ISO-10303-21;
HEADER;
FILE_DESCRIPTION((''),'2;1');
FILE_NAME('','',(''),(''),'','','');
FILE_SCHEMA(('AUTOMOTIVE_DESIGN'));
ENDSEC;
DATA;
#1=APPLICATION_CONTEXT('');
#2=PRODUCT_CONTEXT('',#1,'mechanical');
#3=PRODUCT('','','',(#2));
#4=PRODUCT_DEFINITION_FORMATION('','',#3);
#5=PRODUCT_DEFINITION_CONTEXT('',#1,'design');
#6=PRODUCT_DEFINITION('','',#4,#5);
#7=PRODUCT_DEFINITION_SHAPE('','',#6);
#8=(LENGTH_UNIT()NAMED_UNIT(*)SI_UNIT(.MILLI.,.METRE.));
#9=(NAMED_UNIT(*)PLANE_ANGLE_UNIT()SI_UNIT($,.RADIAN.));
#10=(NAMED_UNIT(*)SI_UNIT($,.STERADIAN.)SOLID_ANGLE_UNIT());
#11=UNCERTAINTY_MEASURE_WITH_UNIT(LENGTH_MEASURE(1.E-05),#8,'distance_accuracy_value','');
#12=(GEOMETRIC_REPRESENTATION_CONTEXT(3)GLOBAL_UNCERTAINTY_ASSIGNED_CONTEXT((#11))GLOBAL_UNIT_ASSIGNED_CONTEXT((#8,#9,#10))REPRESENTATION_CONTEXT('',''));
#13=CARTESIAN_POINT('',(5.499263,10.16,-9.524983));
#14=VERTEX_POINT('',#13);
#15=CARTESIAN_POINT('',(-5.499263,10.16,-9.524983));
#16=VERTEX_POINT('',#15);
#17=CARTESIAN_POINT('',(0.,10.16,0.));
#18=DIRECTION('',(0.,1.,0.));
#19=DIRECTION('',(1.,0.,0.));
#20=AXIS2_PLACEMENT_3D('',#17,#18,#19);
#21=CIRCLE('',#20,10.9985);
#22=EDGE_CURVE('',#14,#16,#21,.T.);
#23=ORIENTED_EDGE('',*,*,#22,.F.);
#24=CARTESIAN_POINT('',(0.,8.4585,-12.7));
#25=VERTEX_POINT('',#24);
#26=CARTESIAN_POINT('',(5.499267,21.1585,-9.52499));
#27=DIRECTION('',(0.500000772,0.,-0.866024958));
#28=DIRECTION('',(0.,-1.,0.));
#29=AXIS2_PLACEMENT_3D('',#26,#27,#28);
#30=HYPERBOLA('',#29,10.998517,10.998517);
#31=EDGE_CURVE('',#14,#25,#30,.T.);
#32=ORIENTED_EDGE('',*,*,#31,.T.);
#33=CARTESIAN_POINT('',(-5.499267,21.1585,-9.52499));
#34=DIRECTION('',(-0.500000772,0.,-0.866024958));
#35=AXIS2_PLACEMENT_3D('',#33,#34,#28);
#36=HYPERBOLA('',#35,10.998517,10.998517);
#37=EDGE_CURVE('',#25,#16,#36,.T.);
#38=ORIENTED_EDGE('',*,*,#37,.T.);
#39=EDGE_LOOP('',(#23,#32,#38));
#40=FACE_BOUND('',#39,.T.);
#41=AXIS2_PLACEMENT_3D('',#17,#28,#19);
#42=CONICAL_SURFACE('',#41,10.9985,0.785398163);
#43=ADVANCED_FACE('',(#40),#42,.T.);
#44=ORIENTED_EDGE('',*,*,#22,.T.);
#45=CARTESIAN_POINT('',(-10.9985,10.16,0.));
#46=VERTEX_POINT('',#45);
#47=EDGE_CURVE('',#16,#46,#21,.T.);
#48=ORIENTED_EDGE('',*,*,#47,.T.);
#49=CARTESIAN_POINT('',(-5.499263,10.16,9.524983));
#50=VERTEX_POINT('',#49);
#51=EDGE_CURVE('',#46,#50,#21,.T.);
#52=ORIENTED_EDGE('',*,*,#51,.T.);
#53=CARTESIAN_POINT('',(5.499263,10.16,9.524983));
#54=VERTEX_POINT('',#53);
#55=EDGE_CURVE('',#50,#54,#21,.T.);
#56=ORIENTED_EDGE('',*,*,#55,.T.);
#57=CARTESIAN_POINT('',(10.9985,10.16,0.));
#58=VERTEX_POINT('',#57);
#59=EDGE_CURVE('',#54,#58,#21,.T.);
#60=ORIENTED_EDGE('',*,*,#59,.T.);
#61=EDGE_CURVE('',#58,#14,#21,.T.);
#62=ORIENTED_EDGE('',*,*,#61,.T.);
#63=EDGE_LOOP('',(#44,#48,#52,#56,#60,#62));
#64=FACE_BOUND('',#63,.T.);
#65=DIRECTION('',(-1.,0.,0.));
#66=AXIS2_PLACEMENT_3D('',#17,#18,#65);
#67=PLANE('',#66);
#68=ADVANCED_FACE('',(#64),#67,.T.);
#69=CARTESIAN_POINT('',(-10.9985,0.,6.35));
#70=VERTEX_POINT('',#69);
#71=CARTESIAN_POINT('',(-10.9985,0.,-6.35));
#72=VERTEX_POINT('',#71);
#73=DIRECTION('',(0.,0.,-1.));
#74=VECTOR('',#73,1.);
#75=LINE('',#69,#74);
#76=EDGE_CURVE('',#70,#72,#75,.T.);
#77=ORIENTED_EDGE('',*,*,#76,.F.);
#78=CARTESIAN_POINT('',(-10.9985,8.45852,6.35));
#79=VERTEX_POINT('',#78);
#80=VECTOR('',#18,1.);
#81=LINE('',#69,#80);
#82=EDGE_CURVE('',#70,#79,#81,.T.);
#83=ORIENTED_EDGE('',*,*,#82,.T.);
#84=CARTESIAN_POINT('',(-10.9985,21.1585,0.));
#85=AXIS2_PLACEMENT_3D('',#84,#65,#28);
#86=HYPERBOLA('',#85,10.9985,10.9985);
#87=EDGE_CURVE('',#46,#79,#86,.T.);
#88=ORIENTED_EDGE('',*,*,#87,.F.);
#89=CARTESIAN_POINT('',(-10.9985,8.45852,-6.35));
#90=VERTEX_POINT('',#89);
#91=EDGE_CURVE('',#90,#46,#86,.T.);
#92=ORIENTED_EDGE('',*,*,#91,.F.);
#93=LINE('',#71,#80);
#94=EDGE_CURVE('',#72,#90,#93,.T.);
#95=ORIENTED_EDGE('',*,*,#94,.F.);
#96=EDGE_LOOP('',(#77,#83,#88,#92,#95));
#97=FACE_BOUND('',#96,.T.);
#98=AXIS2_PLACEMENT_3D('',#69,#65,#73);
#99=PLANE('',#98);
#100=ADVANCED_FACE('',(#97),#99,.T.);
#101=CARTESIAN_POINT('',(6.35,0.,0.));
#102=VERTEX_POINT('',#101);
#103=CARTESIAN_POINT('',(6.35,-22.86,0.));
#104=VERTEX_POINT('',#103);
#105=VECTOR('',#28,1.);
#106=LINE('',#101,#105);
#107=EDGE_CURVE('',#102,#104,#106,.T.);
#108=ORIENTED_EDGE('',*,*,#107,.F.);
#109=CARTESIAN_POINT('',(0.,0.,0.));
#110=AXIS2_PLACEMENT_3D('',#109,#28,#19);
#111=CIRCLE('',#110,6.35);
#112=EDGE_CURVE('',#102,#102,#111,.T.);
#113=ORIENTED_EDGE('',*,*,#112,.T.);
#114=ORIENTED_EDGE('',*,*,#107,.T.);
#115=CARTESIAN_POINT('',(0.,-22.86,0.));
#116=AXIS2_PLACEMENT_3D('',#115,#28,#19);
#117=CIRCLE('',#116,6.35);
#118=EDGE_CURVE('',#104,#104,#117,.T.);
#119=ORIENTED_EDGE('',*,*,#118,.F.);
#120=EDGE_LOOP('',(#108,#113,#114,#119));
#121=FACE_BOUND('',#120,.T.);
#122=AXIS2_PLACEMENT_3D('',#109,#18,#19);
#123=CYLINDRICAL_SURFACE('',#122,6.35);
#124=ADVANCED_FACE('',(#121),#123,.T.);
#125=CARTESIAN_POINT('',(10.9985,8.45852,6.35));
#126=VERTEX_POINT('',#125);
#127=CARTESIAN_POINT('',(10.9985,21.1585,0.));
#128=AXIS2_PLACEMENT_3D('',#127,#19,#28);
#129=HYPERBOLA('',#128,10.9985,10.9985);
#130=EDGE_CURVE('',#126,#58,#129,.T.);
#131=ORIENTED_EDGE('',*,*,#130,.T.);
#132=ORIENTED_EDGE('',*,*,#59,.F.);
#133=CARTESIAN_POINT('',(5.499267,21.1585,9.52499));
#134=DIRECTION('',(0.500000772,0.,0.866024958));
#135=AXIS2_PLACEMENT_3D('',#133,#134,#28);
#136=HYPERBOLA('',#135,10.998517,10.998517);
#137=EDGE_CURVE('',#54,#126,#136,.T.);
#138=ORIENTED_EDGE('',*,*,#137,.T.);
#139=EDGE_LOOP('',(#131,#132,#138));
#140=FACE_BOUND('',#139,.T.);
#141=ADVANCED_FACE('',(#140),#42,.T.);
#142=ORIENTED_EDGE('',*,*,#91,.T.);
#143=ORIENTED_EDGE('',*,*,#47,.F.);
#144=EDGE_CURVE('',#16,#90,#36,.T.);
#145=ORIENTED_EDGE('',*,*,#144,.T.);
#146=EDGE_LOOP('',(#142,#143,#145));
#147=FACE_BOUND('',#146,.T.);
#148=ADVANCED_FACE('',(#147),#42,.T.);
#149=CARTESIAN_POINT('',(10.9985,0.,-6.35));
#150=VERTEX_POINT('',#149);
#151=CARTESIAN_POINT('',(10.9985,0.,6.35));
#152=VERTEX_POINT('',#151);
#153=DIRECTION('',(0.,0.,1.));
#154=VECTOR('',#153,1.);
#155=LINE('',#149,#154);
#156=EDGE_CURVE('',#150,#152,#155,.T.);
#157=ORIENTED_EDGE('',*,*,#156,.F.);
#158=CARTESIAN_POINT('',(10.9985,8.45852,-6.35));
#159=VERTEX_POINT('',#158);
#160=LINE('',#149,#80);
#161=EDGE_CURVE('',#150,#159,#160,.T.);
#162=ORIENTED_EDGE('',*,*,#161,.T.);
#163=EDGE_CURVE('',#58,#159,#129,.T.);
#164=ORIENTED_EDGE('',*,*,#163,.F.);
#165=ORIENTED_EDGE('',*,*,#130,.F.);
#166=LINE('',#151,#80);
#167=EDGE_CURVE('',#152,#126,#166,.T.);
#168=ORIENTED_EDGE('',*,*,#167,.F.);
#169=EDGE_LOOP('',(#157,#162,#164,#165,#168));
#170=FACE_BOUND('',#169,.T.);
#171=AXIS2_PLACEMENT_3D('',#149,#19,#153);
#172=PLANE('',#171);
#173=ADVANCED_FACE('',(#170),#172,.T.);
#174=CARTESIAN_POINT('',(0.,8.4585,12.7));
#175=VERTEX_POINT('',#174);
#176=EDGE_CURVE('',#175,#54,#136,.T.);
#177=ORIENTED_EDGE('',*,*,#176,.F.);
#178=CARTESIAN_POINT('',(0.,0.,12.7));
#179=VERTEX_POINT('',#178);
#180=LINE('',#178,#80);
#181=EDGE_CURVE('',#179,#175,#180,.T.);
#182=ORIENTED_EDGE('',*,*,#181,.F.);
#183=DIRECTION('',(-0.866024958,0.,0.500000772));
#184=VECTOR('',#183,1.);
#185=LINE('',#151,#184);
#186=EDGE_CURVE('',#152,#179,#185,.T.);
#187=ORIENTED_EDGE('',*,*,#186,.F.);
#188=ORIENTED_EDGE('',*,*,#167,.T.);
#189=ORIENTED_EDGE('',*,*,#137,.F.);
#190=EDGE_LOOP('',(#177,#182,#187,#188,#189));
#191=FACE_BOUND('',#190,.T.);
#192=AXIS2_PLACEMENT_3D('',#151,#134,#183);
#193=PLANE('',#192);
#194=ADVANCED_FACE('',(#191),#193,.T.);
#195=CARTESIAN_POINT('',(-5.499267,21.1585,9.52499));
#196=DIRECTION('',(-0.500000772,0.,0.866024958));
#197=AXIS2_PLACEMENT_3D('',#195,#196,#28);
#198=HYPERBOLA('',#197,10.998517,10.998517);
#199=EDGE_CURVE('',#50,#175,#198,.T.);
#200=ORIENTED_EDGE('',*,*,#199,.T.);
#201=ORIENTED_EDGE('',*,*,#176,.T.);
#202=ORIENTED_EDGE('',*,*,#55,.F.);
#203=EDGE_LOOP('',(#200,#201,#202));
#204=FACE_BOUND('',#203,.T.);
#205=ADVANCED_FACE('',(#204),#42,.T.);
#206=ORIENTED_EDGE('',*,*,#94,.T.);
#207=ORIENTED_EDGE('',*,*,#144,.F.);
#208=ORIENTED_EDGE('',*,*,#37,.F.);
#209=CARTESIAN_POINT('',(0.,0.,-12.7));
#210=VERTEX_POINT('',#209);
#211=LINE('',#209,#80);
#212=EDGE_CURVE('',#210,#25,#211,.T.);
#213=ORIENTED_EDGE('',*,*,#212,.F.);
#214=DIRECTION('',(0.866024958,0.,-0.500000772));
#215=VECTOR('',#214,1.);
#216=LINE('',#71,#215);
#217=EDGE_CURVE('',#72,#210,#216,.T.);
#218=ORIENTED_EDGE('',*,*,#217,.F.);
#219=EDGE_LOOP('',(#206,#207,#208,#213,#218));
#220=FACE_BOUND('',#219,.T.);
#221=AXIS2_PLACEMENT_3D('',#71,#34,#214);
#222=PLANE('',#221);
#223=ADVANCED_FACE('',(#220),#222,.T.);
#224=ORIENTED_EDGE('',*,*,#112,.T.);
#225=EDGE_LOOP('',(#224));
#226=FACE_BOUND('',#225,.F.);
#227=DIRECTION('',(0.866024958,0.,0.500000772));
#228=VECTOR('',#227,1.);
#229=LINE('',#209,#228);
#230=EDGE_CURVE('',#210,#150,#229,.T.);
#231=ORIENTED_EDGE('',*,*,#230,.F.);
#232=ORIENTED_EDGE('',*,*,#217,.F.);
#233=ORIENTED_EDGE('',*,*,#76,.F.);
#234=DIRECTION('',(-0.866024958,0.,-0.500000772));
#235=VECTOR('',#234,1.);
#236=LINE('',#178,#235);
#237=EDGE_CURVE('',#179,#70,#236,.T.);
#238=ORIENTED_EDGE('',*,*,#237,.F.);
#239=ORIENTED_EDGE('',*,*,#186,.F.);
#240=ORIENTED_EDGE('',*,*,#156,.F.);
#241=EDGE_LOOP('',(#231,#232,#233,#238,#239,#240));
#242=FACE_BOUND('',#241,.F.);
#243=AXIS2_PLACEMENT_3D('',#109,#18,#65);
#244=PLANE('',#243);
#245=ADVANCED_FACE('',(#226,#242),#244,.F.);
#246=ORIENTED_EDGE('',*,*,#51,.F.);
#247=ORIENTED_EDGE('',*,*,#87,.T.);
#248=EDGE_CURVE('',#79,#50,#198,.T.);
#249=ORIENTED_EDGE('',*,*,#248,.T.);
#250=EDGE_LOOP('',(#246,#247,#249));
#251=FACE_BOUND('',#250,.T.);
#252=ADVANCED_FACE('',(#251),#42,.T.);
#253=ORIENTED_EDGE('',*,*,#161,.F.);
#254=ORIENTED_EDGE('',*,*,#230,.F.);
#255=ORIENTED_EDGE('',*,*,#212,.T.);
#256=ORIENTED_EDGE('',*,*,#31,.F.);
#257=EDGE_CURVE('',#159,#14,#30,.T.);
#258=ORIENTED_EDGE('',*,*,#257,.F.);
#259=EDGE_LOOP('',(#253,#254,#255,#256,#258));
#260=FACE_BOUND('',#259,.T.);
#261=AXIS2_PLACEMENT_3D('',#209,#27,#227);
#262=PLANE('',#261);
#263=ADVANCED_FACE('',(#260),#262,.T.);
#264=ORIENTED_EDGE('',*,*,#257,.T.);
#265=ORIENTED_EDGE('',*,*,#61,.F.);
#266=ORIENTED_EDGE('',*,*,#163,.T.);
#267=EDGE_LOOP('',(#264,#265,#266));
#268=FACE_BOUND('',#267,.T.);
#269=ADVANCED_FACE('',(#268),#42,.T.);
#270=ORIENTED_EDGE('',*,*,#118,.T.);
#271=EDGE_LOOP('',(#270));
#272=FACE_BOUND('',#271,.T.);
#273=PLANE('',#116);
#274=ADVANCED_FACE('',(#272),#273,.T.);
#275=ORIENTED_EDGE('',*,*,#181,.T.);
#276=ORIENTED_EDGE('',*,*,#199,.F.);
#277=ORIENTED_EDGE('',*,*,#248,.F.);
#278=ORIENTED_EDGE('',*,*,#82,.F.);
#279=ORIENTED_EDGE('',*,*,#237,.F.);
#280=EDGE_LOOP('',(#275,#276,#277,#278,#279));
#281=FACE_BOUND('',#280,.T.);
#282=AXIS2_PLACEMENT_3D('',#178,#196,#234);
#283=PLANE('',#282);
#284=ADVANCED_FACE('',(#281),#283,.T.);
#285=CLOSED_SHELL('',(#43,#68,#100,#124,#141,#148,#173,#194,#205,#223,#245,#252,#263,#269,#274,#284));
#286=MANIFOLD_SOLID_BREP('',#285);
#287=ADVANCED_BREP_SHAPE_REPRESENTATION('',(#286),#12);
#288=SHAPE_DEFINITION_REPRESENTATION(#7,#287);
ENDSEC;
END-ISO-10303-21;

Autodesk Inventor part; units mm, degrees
ref_plane "YZ Plane" through (0, 0, 0) normal (1, 0, 0) x (0, 1, 0)
ref_plane "XZ Plane" through (0, 0, 0) normal (0, 1, 0) x (-1, 0, 0)
ref_plane "XY Plane" through (0, 0, 0) normal (0, 0, 1) x (1, 0, 0)
sketch "Sketch1" plane through (0, 0, 0) normal (0, 1, 0) x (-1, 0, 0)
  line L0 (10.9985, -6.35) -> (0, -12.7)
  line L1 (0, -12.7) -> (-10.9985, -6.35)
  line L2 (-10.9985, -6.35) -> (-10.9985, 6.35)
  line L3 (-10.9985, 6.35) -> (0, 12.7)
  line L4 (0, 12.7) -> (10.9985, 6.35)
  line L5 (10.9985, 6.35) -> (10.9985, -6.35)
  point P0 (0, 0)
  point P1 (0, 0)
  dimension "d0" = 25.4
extrude "Extrusion1" add sketch "Sketch1" along normal blind 10.16
sketch "Sketch2" plane through (0, 10.16, 0) normal (0, 1, 0) x (1, 0, 0)
  circle A0 centre (0, 0) radius 10.9985
extrude "Extrusion2" cut sketch "Sketch2" against normal through all draft 45 keep common part
sketch "Sketch3" plane through (0, 0, 0) normal (0, -1, 0) x (1, 0, 0)
  circle A0 centre (0, 0) radius 6.35
  dimension "d5" = 12.7
extrude "Extrusion3" add sketch "Sketch3" along normal blind 22.86
thread "Thread1" size "1/2-13 UNC" class "1A" standard "ANSI Unified Screw Threads" full length
properties part number "Bolt"
